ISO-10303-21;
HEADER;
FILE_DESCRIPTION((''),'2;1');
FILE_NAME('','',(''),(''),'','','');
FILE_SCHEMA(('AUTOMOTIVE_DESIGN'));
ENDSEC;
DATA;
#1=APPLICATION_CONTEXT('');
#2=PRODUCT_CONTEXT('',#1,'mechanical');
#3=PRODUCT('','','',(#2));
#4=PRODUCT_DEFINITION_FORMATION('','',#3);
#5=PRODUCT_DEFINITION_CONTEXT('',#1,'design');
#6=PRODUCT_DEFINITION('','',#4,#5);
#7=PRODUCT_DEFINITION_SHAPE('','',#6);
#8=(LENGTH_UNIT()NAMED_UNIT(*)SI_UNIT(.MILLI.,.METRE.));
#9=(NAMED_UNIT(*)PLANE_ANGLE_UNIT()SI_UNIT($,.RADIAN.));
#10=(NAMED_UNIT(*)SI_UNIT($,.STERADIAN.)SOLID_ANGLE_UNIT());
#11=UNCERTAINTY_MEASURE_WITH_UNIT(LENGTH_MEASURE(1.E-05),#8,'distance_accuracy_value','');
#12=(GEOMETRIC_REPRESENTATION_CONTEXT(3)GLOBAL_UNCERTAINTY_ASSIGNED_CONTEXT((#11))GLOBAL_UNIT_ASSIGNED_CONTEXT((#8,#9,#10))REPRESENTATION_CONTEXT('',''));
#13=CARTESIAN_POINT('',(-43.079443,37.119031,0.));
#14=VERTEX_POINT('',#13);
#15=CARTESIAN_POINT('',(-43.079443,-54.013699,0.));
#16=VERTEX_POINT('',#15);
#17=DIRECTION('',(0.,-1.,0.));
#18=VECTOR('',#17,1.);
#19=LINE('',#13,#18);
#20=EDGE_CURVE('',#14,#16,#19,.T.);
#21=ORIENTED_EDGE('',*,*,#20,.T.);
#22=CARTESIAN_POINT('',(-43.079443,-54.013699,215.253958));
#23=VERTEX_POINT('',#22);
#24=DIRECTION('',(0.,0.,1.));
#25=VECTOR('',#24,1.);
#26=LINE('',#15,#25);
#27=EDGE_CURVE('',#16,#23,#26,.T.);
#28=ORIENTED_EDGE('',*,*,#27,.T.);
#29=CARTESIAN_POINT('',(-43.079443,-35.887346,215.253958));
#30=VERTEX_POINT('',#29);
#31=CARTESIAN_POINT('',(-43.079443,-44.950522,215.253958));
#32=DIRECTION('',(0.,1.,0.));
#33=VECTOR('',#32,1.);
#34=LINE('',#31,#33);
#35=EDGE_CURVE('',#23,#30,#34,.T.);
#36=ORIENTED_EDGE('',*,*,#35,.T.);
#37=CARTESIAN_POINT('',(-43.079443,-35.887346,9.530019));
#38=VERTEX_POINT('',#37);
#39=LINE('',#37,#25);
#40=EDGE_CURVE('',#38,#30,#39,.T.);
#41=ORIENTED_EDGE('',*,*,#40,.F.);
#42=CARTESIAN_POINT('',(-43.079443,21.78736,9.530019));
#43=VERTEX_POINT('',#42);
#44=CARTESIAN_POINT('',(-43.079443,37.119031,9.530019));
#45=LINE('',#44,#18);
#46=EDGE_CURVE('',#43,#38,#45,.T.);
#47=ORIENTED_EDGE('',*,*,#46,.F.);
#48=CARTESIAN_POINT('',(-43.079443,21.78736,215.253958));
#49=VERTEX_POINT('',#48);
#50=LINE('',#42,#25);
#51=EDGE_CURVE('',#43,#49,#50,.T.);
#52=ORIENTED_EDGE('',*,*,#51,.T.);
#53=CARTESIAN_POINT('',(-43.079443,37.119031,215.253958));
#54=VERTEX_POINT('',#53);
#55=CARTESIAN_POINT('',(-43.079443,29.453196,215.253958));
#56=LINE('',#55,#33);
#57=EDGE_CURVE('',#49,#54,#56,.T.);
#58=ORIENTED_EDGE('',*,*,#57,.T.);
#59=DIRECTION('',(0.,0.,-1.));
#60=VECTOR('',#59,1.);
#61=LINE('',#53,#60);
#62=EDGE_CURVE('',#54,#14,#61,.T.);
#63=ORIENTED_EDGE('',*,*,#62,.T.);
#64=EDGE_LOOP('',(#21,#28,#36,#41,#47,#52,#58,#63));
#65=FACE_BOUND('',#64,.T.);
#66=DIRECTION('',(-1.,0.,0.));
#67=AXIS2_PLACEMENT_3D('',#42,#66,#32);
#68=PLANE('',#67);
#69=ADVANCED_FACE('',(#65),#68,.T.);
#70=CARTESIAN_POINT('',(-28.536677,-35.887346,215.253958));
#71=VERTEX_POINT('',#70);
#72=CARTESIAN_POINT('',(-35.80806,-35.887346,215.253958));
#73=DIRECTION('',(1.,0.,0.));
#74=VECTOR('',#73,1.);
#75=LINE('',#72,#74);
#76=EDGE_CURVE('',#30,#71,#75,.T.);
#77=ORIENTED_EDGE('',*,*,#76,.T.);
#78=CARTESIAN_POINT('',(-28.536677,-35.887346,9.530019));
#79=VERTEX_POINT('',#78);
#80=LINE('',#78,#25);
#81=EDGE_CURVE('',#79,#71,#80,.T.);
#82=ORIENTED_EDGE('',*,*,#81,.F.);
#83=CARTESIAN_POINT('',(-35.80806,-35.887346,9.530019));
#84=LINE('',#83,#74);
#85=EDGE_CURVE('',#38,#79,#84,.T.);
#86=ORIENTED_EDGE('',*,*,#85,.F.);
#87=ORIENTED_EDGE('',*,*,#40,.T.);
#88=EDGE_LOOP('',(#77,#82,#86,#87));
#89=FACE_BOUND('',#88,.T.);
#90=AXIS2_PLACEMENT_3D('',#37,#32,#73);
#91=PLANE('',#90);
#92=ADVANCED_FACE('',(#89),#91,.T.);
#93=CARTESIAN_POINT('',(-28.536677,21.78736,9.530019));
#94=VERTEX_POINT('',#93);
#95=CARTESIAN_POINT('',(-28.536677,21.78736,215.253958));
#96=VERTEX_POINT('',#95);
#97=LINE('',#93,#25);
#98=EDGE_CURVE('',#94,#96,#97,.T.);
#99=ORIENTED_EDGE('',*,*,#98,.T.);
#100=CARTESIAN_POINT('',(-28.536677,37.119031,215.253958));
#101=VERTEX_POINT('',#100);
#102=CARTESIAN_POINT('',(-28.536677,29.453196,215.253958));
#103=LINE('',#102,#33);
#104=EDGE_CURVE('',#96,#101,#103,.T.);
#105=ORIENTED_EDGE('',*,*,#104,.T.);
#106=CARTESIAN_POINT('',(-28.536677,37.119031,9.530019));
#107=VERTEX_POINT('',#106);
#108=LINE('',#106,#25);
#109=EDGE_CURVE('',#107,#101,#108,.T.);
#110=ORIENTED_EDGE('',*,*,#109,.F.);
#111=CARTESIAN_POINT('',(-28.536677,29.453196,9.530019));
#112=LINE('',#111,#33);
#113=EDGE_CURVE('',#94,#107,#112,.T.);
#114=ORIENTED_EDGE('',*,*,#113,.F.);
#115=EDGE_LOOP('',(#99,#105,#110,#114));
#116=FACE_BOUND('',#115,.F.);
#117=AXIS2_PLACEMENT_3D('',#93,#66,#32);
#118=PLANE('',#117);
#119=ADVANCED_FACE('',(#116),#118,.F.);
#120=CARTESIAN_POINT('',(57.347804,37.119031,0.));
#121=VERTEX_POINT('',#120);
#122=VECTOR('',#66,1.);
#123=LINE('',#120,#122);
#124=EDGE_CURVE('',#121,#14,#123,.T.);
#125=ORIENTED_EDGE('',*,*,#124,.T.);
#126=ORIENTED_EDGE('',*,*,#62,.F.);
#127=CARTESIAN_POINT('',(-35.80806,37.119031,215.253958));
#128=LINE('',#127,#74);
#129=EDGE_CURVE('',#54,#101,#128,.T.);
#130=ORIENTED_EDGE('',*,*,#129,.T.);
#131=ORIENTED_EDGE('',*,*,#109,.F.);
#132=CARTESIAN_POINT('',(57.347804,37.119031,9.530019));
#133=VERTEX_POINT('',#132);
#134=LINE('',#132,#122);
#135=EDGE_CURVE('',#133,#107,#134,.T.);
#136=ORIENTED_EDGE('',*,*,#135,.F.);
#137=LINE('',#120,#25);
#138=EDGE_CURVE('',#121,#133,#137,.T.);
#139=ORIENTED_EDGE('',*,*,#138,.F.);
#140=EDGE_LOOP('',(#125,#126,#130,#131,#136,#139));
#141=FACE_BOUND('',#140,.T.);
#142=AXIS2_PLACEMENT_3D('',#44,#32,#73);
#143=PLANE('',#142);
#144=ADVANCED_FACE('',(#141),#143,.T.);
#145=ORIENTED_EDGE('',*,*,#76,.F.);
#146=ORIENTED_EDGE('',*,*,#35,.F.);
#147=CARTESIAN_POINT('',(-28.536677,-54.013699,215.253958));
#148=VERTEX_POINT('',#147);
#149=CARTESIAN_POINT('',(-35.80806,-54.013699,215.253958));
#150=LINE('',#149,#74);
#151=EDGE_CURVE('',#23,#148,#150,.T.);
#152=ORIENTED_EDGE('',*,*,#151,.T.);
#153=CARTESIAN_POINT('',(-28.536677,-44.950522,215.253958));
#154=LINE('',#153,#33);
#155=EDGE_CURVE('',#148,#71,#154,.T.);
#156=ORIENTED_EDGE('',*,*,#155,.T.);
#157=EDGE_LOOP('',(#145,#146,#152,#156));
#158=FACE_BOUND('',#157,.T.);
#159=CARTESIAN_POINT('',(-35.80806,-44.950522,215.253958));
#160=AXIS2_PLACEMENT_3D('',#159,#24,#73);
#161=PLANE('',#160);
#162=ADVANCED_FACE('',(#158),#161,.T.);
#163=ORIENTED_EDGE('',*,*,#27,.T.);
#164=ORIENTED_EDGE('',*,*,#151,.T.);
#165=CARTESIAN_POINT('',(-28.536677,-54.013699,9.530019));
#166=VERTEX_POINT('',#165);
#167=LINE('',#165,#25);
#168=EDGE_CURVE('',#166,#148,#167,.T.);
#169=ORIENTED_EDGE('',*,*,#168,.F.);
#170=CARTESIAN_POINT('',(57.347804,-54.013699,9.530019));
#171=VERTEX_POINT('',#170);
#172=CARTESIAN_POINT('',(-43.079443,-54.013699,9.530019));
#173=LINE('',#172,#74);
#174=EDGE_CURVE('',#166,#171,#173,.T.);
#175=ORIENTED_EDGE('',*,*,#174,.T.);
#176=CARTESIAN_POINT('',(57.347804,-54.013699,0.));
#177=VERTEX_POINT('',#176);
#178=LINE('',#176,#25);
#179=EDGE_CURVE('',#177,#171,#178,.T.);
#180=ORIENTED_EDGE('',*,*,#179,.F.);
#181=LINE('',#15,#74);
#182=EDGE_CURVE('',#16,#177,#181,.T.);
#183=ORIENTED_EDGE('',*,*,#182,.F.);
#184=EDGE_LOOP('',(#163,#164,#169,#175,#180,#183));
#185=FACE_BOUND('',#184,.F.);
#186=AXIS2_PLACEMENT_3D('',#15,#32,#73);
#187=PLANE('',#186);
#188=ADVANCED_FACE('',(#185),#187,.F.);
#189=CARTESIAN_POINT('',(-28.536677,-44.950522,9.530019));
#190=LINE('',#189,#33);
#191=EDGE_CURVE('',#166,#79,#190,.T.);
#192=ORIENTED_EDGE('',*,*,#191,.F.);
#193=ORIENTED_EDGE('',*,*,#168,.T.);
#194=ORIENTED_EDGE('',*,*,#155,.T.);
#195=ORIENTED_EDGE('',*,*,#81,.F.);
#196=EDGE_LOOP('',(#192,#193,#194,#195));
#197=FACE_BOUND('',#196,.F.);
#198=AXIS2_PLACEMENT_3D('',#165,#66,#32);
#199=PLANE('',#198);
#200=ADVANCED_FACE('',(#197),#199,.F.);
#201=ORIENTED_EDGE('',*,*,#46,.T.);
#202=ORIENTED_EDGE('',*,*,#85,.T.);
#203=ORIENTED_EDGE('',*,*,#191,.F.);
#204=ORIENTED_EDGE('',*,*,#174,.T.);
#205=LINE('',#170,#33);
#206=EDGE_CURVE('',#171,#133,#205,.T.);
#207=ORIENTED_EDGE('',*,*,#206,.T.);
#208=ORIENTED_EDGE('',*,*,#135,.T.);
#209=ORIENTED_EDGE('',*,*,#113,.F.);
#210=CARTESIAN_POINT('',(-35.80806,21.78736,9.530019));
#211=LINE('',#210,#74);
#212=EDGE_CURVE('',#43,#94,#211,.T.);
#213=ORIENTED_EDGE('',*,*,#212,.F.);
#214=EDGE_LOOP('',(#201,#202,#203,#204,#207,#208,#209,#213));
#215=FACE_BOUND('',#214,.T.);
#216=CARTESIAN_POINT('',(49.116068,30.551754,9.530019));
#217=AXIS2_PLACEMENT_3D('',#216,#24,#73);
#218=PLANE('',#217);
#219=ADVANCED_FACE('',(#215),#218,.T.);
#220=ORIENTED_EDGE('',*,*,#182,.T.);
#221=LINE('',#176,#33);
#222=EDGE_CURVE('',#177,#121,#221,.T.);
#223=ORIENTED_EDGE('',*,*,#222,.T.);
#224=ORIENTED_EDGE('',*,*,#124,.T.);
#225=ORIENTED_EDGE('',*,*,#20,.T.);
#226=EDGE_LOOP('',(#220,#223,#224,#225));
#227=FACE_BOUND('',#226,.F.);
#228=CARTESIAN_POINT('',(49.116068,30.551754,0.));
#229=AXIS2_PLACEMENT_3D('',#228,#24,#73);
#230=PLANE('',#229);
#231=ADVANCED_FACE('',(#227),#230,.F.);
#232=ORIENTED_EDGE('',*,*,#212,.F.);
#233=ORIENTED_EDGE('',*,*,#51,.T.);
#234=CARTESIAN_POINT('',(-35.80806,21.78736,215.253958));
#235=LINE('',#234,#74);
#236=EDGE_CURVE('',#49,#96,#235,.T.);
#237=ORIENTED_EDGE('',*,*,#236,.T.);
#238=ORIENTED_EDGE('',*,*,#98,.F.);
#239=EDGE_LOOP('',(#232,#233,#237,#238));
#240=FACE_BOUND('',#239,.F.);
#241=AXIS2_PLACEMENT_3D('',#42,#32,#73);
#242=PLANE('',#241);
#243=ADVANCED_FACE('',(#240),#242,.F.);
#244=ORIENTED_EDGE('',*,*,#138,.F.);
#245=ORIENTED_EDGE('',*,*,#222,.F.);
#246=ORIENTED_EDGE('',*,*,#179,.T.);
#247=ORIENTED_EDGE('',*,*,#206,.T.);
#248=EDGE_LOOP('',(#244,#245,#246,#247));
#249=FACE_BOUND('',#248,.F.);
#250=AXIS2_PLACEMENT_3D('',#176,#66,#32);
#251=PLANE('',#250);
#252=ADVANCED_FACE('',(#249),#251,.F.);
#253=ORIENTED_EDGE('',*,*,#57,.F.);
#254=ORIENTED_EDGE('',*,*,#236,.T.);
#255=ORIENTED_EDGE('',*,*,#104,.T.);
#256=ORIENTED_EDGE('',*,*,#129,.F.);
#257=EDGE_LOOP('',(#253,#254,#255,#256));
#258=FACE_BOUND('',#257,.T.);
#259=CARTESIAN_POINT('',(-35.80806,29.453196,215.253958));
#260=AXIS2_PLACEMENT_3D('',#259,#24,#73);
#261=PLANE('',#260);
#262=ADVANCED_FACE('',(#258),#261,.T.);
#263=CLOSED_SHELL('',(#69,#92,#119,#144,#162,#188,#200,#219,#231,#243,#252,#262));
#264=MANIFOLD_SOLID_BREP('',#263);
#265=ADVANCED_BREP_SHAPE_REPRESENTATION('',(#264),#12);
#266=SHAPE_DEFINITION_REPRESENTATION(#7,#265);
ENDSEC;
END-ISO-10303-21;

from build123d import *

# Parameters (mm, degrees)
F0_W     = 16.4634734392
F0_H     = 13.1345540285
F0_H_2   = 62.0689839125
F0_W_2   = 13.7195661664
F0_W_3   = 70.2442079782
F0_H_3   = 15.9291923046
F1_DEPTH = 9.5300190151
F2_W     = 14.5427659154
F2_H     = 15.3316706419
F2_H_2   = 18.1263536215
F3_DEPTH = 205.7239394635


# Not quite as in the source:
# - the program builds the solid bodies; features that only make, move or delete a surface that nothing else refers to are left out


with BuildPart() as f1:
    # F0 (on Top) → F1 (new body)
    with BuildSketch(Plane.XY):
        with Locations((49.1160675883, 30.5517539382)):
            Rectangle(F0_W, F0_H)
        with Locations((49.1160675883, -7.0500150323)):
            Rectangle(F0_W, F0_H_2)
        with Locations((-36.2196601927, 30.5517539382)):
            Rectangle(F0_W_2, F0_H)
        with Locations((5.7622268796, 30.5517539382)):
            Rectangle(F0_W_3, F0_H)
        with Locations((-36.2196601927, -7.0500150323)):
            Rectangle(F0_W_2, F0_H_2)
        with Locations((-36.2196601927, -46.0491031408)):
            Rectangle(F0_W_2, F0_H_3)
        with Locations((5.7622268796, -46.0491031408)):
            Rectangle(F0_W_3, F0_H_3)
        with Locations((49.1160675883, -46.0491031408)):
            Rectangle(F0_W, F0_H_3)
        with Locations((5.7622268796, -7.0500150323)):
            Rectangle(F0_W_3, F0_H_2)
    extrude(amount=F1_DEPTH)

    # F2 (on face) → F3 (join)
    with BuildSketch(Plane.XY.offset(9.5300190151)):
        with Locations((-35.8080603182, 29.4531956315)):
            Rectangle(F2_W, F2_H)
        with Locations((-35.8080603182, -44.9505224824)):
            Rectangle(F2_W, F2_H_2)
    extrude(amount=F3_DEPTH)


solid = f1.part
